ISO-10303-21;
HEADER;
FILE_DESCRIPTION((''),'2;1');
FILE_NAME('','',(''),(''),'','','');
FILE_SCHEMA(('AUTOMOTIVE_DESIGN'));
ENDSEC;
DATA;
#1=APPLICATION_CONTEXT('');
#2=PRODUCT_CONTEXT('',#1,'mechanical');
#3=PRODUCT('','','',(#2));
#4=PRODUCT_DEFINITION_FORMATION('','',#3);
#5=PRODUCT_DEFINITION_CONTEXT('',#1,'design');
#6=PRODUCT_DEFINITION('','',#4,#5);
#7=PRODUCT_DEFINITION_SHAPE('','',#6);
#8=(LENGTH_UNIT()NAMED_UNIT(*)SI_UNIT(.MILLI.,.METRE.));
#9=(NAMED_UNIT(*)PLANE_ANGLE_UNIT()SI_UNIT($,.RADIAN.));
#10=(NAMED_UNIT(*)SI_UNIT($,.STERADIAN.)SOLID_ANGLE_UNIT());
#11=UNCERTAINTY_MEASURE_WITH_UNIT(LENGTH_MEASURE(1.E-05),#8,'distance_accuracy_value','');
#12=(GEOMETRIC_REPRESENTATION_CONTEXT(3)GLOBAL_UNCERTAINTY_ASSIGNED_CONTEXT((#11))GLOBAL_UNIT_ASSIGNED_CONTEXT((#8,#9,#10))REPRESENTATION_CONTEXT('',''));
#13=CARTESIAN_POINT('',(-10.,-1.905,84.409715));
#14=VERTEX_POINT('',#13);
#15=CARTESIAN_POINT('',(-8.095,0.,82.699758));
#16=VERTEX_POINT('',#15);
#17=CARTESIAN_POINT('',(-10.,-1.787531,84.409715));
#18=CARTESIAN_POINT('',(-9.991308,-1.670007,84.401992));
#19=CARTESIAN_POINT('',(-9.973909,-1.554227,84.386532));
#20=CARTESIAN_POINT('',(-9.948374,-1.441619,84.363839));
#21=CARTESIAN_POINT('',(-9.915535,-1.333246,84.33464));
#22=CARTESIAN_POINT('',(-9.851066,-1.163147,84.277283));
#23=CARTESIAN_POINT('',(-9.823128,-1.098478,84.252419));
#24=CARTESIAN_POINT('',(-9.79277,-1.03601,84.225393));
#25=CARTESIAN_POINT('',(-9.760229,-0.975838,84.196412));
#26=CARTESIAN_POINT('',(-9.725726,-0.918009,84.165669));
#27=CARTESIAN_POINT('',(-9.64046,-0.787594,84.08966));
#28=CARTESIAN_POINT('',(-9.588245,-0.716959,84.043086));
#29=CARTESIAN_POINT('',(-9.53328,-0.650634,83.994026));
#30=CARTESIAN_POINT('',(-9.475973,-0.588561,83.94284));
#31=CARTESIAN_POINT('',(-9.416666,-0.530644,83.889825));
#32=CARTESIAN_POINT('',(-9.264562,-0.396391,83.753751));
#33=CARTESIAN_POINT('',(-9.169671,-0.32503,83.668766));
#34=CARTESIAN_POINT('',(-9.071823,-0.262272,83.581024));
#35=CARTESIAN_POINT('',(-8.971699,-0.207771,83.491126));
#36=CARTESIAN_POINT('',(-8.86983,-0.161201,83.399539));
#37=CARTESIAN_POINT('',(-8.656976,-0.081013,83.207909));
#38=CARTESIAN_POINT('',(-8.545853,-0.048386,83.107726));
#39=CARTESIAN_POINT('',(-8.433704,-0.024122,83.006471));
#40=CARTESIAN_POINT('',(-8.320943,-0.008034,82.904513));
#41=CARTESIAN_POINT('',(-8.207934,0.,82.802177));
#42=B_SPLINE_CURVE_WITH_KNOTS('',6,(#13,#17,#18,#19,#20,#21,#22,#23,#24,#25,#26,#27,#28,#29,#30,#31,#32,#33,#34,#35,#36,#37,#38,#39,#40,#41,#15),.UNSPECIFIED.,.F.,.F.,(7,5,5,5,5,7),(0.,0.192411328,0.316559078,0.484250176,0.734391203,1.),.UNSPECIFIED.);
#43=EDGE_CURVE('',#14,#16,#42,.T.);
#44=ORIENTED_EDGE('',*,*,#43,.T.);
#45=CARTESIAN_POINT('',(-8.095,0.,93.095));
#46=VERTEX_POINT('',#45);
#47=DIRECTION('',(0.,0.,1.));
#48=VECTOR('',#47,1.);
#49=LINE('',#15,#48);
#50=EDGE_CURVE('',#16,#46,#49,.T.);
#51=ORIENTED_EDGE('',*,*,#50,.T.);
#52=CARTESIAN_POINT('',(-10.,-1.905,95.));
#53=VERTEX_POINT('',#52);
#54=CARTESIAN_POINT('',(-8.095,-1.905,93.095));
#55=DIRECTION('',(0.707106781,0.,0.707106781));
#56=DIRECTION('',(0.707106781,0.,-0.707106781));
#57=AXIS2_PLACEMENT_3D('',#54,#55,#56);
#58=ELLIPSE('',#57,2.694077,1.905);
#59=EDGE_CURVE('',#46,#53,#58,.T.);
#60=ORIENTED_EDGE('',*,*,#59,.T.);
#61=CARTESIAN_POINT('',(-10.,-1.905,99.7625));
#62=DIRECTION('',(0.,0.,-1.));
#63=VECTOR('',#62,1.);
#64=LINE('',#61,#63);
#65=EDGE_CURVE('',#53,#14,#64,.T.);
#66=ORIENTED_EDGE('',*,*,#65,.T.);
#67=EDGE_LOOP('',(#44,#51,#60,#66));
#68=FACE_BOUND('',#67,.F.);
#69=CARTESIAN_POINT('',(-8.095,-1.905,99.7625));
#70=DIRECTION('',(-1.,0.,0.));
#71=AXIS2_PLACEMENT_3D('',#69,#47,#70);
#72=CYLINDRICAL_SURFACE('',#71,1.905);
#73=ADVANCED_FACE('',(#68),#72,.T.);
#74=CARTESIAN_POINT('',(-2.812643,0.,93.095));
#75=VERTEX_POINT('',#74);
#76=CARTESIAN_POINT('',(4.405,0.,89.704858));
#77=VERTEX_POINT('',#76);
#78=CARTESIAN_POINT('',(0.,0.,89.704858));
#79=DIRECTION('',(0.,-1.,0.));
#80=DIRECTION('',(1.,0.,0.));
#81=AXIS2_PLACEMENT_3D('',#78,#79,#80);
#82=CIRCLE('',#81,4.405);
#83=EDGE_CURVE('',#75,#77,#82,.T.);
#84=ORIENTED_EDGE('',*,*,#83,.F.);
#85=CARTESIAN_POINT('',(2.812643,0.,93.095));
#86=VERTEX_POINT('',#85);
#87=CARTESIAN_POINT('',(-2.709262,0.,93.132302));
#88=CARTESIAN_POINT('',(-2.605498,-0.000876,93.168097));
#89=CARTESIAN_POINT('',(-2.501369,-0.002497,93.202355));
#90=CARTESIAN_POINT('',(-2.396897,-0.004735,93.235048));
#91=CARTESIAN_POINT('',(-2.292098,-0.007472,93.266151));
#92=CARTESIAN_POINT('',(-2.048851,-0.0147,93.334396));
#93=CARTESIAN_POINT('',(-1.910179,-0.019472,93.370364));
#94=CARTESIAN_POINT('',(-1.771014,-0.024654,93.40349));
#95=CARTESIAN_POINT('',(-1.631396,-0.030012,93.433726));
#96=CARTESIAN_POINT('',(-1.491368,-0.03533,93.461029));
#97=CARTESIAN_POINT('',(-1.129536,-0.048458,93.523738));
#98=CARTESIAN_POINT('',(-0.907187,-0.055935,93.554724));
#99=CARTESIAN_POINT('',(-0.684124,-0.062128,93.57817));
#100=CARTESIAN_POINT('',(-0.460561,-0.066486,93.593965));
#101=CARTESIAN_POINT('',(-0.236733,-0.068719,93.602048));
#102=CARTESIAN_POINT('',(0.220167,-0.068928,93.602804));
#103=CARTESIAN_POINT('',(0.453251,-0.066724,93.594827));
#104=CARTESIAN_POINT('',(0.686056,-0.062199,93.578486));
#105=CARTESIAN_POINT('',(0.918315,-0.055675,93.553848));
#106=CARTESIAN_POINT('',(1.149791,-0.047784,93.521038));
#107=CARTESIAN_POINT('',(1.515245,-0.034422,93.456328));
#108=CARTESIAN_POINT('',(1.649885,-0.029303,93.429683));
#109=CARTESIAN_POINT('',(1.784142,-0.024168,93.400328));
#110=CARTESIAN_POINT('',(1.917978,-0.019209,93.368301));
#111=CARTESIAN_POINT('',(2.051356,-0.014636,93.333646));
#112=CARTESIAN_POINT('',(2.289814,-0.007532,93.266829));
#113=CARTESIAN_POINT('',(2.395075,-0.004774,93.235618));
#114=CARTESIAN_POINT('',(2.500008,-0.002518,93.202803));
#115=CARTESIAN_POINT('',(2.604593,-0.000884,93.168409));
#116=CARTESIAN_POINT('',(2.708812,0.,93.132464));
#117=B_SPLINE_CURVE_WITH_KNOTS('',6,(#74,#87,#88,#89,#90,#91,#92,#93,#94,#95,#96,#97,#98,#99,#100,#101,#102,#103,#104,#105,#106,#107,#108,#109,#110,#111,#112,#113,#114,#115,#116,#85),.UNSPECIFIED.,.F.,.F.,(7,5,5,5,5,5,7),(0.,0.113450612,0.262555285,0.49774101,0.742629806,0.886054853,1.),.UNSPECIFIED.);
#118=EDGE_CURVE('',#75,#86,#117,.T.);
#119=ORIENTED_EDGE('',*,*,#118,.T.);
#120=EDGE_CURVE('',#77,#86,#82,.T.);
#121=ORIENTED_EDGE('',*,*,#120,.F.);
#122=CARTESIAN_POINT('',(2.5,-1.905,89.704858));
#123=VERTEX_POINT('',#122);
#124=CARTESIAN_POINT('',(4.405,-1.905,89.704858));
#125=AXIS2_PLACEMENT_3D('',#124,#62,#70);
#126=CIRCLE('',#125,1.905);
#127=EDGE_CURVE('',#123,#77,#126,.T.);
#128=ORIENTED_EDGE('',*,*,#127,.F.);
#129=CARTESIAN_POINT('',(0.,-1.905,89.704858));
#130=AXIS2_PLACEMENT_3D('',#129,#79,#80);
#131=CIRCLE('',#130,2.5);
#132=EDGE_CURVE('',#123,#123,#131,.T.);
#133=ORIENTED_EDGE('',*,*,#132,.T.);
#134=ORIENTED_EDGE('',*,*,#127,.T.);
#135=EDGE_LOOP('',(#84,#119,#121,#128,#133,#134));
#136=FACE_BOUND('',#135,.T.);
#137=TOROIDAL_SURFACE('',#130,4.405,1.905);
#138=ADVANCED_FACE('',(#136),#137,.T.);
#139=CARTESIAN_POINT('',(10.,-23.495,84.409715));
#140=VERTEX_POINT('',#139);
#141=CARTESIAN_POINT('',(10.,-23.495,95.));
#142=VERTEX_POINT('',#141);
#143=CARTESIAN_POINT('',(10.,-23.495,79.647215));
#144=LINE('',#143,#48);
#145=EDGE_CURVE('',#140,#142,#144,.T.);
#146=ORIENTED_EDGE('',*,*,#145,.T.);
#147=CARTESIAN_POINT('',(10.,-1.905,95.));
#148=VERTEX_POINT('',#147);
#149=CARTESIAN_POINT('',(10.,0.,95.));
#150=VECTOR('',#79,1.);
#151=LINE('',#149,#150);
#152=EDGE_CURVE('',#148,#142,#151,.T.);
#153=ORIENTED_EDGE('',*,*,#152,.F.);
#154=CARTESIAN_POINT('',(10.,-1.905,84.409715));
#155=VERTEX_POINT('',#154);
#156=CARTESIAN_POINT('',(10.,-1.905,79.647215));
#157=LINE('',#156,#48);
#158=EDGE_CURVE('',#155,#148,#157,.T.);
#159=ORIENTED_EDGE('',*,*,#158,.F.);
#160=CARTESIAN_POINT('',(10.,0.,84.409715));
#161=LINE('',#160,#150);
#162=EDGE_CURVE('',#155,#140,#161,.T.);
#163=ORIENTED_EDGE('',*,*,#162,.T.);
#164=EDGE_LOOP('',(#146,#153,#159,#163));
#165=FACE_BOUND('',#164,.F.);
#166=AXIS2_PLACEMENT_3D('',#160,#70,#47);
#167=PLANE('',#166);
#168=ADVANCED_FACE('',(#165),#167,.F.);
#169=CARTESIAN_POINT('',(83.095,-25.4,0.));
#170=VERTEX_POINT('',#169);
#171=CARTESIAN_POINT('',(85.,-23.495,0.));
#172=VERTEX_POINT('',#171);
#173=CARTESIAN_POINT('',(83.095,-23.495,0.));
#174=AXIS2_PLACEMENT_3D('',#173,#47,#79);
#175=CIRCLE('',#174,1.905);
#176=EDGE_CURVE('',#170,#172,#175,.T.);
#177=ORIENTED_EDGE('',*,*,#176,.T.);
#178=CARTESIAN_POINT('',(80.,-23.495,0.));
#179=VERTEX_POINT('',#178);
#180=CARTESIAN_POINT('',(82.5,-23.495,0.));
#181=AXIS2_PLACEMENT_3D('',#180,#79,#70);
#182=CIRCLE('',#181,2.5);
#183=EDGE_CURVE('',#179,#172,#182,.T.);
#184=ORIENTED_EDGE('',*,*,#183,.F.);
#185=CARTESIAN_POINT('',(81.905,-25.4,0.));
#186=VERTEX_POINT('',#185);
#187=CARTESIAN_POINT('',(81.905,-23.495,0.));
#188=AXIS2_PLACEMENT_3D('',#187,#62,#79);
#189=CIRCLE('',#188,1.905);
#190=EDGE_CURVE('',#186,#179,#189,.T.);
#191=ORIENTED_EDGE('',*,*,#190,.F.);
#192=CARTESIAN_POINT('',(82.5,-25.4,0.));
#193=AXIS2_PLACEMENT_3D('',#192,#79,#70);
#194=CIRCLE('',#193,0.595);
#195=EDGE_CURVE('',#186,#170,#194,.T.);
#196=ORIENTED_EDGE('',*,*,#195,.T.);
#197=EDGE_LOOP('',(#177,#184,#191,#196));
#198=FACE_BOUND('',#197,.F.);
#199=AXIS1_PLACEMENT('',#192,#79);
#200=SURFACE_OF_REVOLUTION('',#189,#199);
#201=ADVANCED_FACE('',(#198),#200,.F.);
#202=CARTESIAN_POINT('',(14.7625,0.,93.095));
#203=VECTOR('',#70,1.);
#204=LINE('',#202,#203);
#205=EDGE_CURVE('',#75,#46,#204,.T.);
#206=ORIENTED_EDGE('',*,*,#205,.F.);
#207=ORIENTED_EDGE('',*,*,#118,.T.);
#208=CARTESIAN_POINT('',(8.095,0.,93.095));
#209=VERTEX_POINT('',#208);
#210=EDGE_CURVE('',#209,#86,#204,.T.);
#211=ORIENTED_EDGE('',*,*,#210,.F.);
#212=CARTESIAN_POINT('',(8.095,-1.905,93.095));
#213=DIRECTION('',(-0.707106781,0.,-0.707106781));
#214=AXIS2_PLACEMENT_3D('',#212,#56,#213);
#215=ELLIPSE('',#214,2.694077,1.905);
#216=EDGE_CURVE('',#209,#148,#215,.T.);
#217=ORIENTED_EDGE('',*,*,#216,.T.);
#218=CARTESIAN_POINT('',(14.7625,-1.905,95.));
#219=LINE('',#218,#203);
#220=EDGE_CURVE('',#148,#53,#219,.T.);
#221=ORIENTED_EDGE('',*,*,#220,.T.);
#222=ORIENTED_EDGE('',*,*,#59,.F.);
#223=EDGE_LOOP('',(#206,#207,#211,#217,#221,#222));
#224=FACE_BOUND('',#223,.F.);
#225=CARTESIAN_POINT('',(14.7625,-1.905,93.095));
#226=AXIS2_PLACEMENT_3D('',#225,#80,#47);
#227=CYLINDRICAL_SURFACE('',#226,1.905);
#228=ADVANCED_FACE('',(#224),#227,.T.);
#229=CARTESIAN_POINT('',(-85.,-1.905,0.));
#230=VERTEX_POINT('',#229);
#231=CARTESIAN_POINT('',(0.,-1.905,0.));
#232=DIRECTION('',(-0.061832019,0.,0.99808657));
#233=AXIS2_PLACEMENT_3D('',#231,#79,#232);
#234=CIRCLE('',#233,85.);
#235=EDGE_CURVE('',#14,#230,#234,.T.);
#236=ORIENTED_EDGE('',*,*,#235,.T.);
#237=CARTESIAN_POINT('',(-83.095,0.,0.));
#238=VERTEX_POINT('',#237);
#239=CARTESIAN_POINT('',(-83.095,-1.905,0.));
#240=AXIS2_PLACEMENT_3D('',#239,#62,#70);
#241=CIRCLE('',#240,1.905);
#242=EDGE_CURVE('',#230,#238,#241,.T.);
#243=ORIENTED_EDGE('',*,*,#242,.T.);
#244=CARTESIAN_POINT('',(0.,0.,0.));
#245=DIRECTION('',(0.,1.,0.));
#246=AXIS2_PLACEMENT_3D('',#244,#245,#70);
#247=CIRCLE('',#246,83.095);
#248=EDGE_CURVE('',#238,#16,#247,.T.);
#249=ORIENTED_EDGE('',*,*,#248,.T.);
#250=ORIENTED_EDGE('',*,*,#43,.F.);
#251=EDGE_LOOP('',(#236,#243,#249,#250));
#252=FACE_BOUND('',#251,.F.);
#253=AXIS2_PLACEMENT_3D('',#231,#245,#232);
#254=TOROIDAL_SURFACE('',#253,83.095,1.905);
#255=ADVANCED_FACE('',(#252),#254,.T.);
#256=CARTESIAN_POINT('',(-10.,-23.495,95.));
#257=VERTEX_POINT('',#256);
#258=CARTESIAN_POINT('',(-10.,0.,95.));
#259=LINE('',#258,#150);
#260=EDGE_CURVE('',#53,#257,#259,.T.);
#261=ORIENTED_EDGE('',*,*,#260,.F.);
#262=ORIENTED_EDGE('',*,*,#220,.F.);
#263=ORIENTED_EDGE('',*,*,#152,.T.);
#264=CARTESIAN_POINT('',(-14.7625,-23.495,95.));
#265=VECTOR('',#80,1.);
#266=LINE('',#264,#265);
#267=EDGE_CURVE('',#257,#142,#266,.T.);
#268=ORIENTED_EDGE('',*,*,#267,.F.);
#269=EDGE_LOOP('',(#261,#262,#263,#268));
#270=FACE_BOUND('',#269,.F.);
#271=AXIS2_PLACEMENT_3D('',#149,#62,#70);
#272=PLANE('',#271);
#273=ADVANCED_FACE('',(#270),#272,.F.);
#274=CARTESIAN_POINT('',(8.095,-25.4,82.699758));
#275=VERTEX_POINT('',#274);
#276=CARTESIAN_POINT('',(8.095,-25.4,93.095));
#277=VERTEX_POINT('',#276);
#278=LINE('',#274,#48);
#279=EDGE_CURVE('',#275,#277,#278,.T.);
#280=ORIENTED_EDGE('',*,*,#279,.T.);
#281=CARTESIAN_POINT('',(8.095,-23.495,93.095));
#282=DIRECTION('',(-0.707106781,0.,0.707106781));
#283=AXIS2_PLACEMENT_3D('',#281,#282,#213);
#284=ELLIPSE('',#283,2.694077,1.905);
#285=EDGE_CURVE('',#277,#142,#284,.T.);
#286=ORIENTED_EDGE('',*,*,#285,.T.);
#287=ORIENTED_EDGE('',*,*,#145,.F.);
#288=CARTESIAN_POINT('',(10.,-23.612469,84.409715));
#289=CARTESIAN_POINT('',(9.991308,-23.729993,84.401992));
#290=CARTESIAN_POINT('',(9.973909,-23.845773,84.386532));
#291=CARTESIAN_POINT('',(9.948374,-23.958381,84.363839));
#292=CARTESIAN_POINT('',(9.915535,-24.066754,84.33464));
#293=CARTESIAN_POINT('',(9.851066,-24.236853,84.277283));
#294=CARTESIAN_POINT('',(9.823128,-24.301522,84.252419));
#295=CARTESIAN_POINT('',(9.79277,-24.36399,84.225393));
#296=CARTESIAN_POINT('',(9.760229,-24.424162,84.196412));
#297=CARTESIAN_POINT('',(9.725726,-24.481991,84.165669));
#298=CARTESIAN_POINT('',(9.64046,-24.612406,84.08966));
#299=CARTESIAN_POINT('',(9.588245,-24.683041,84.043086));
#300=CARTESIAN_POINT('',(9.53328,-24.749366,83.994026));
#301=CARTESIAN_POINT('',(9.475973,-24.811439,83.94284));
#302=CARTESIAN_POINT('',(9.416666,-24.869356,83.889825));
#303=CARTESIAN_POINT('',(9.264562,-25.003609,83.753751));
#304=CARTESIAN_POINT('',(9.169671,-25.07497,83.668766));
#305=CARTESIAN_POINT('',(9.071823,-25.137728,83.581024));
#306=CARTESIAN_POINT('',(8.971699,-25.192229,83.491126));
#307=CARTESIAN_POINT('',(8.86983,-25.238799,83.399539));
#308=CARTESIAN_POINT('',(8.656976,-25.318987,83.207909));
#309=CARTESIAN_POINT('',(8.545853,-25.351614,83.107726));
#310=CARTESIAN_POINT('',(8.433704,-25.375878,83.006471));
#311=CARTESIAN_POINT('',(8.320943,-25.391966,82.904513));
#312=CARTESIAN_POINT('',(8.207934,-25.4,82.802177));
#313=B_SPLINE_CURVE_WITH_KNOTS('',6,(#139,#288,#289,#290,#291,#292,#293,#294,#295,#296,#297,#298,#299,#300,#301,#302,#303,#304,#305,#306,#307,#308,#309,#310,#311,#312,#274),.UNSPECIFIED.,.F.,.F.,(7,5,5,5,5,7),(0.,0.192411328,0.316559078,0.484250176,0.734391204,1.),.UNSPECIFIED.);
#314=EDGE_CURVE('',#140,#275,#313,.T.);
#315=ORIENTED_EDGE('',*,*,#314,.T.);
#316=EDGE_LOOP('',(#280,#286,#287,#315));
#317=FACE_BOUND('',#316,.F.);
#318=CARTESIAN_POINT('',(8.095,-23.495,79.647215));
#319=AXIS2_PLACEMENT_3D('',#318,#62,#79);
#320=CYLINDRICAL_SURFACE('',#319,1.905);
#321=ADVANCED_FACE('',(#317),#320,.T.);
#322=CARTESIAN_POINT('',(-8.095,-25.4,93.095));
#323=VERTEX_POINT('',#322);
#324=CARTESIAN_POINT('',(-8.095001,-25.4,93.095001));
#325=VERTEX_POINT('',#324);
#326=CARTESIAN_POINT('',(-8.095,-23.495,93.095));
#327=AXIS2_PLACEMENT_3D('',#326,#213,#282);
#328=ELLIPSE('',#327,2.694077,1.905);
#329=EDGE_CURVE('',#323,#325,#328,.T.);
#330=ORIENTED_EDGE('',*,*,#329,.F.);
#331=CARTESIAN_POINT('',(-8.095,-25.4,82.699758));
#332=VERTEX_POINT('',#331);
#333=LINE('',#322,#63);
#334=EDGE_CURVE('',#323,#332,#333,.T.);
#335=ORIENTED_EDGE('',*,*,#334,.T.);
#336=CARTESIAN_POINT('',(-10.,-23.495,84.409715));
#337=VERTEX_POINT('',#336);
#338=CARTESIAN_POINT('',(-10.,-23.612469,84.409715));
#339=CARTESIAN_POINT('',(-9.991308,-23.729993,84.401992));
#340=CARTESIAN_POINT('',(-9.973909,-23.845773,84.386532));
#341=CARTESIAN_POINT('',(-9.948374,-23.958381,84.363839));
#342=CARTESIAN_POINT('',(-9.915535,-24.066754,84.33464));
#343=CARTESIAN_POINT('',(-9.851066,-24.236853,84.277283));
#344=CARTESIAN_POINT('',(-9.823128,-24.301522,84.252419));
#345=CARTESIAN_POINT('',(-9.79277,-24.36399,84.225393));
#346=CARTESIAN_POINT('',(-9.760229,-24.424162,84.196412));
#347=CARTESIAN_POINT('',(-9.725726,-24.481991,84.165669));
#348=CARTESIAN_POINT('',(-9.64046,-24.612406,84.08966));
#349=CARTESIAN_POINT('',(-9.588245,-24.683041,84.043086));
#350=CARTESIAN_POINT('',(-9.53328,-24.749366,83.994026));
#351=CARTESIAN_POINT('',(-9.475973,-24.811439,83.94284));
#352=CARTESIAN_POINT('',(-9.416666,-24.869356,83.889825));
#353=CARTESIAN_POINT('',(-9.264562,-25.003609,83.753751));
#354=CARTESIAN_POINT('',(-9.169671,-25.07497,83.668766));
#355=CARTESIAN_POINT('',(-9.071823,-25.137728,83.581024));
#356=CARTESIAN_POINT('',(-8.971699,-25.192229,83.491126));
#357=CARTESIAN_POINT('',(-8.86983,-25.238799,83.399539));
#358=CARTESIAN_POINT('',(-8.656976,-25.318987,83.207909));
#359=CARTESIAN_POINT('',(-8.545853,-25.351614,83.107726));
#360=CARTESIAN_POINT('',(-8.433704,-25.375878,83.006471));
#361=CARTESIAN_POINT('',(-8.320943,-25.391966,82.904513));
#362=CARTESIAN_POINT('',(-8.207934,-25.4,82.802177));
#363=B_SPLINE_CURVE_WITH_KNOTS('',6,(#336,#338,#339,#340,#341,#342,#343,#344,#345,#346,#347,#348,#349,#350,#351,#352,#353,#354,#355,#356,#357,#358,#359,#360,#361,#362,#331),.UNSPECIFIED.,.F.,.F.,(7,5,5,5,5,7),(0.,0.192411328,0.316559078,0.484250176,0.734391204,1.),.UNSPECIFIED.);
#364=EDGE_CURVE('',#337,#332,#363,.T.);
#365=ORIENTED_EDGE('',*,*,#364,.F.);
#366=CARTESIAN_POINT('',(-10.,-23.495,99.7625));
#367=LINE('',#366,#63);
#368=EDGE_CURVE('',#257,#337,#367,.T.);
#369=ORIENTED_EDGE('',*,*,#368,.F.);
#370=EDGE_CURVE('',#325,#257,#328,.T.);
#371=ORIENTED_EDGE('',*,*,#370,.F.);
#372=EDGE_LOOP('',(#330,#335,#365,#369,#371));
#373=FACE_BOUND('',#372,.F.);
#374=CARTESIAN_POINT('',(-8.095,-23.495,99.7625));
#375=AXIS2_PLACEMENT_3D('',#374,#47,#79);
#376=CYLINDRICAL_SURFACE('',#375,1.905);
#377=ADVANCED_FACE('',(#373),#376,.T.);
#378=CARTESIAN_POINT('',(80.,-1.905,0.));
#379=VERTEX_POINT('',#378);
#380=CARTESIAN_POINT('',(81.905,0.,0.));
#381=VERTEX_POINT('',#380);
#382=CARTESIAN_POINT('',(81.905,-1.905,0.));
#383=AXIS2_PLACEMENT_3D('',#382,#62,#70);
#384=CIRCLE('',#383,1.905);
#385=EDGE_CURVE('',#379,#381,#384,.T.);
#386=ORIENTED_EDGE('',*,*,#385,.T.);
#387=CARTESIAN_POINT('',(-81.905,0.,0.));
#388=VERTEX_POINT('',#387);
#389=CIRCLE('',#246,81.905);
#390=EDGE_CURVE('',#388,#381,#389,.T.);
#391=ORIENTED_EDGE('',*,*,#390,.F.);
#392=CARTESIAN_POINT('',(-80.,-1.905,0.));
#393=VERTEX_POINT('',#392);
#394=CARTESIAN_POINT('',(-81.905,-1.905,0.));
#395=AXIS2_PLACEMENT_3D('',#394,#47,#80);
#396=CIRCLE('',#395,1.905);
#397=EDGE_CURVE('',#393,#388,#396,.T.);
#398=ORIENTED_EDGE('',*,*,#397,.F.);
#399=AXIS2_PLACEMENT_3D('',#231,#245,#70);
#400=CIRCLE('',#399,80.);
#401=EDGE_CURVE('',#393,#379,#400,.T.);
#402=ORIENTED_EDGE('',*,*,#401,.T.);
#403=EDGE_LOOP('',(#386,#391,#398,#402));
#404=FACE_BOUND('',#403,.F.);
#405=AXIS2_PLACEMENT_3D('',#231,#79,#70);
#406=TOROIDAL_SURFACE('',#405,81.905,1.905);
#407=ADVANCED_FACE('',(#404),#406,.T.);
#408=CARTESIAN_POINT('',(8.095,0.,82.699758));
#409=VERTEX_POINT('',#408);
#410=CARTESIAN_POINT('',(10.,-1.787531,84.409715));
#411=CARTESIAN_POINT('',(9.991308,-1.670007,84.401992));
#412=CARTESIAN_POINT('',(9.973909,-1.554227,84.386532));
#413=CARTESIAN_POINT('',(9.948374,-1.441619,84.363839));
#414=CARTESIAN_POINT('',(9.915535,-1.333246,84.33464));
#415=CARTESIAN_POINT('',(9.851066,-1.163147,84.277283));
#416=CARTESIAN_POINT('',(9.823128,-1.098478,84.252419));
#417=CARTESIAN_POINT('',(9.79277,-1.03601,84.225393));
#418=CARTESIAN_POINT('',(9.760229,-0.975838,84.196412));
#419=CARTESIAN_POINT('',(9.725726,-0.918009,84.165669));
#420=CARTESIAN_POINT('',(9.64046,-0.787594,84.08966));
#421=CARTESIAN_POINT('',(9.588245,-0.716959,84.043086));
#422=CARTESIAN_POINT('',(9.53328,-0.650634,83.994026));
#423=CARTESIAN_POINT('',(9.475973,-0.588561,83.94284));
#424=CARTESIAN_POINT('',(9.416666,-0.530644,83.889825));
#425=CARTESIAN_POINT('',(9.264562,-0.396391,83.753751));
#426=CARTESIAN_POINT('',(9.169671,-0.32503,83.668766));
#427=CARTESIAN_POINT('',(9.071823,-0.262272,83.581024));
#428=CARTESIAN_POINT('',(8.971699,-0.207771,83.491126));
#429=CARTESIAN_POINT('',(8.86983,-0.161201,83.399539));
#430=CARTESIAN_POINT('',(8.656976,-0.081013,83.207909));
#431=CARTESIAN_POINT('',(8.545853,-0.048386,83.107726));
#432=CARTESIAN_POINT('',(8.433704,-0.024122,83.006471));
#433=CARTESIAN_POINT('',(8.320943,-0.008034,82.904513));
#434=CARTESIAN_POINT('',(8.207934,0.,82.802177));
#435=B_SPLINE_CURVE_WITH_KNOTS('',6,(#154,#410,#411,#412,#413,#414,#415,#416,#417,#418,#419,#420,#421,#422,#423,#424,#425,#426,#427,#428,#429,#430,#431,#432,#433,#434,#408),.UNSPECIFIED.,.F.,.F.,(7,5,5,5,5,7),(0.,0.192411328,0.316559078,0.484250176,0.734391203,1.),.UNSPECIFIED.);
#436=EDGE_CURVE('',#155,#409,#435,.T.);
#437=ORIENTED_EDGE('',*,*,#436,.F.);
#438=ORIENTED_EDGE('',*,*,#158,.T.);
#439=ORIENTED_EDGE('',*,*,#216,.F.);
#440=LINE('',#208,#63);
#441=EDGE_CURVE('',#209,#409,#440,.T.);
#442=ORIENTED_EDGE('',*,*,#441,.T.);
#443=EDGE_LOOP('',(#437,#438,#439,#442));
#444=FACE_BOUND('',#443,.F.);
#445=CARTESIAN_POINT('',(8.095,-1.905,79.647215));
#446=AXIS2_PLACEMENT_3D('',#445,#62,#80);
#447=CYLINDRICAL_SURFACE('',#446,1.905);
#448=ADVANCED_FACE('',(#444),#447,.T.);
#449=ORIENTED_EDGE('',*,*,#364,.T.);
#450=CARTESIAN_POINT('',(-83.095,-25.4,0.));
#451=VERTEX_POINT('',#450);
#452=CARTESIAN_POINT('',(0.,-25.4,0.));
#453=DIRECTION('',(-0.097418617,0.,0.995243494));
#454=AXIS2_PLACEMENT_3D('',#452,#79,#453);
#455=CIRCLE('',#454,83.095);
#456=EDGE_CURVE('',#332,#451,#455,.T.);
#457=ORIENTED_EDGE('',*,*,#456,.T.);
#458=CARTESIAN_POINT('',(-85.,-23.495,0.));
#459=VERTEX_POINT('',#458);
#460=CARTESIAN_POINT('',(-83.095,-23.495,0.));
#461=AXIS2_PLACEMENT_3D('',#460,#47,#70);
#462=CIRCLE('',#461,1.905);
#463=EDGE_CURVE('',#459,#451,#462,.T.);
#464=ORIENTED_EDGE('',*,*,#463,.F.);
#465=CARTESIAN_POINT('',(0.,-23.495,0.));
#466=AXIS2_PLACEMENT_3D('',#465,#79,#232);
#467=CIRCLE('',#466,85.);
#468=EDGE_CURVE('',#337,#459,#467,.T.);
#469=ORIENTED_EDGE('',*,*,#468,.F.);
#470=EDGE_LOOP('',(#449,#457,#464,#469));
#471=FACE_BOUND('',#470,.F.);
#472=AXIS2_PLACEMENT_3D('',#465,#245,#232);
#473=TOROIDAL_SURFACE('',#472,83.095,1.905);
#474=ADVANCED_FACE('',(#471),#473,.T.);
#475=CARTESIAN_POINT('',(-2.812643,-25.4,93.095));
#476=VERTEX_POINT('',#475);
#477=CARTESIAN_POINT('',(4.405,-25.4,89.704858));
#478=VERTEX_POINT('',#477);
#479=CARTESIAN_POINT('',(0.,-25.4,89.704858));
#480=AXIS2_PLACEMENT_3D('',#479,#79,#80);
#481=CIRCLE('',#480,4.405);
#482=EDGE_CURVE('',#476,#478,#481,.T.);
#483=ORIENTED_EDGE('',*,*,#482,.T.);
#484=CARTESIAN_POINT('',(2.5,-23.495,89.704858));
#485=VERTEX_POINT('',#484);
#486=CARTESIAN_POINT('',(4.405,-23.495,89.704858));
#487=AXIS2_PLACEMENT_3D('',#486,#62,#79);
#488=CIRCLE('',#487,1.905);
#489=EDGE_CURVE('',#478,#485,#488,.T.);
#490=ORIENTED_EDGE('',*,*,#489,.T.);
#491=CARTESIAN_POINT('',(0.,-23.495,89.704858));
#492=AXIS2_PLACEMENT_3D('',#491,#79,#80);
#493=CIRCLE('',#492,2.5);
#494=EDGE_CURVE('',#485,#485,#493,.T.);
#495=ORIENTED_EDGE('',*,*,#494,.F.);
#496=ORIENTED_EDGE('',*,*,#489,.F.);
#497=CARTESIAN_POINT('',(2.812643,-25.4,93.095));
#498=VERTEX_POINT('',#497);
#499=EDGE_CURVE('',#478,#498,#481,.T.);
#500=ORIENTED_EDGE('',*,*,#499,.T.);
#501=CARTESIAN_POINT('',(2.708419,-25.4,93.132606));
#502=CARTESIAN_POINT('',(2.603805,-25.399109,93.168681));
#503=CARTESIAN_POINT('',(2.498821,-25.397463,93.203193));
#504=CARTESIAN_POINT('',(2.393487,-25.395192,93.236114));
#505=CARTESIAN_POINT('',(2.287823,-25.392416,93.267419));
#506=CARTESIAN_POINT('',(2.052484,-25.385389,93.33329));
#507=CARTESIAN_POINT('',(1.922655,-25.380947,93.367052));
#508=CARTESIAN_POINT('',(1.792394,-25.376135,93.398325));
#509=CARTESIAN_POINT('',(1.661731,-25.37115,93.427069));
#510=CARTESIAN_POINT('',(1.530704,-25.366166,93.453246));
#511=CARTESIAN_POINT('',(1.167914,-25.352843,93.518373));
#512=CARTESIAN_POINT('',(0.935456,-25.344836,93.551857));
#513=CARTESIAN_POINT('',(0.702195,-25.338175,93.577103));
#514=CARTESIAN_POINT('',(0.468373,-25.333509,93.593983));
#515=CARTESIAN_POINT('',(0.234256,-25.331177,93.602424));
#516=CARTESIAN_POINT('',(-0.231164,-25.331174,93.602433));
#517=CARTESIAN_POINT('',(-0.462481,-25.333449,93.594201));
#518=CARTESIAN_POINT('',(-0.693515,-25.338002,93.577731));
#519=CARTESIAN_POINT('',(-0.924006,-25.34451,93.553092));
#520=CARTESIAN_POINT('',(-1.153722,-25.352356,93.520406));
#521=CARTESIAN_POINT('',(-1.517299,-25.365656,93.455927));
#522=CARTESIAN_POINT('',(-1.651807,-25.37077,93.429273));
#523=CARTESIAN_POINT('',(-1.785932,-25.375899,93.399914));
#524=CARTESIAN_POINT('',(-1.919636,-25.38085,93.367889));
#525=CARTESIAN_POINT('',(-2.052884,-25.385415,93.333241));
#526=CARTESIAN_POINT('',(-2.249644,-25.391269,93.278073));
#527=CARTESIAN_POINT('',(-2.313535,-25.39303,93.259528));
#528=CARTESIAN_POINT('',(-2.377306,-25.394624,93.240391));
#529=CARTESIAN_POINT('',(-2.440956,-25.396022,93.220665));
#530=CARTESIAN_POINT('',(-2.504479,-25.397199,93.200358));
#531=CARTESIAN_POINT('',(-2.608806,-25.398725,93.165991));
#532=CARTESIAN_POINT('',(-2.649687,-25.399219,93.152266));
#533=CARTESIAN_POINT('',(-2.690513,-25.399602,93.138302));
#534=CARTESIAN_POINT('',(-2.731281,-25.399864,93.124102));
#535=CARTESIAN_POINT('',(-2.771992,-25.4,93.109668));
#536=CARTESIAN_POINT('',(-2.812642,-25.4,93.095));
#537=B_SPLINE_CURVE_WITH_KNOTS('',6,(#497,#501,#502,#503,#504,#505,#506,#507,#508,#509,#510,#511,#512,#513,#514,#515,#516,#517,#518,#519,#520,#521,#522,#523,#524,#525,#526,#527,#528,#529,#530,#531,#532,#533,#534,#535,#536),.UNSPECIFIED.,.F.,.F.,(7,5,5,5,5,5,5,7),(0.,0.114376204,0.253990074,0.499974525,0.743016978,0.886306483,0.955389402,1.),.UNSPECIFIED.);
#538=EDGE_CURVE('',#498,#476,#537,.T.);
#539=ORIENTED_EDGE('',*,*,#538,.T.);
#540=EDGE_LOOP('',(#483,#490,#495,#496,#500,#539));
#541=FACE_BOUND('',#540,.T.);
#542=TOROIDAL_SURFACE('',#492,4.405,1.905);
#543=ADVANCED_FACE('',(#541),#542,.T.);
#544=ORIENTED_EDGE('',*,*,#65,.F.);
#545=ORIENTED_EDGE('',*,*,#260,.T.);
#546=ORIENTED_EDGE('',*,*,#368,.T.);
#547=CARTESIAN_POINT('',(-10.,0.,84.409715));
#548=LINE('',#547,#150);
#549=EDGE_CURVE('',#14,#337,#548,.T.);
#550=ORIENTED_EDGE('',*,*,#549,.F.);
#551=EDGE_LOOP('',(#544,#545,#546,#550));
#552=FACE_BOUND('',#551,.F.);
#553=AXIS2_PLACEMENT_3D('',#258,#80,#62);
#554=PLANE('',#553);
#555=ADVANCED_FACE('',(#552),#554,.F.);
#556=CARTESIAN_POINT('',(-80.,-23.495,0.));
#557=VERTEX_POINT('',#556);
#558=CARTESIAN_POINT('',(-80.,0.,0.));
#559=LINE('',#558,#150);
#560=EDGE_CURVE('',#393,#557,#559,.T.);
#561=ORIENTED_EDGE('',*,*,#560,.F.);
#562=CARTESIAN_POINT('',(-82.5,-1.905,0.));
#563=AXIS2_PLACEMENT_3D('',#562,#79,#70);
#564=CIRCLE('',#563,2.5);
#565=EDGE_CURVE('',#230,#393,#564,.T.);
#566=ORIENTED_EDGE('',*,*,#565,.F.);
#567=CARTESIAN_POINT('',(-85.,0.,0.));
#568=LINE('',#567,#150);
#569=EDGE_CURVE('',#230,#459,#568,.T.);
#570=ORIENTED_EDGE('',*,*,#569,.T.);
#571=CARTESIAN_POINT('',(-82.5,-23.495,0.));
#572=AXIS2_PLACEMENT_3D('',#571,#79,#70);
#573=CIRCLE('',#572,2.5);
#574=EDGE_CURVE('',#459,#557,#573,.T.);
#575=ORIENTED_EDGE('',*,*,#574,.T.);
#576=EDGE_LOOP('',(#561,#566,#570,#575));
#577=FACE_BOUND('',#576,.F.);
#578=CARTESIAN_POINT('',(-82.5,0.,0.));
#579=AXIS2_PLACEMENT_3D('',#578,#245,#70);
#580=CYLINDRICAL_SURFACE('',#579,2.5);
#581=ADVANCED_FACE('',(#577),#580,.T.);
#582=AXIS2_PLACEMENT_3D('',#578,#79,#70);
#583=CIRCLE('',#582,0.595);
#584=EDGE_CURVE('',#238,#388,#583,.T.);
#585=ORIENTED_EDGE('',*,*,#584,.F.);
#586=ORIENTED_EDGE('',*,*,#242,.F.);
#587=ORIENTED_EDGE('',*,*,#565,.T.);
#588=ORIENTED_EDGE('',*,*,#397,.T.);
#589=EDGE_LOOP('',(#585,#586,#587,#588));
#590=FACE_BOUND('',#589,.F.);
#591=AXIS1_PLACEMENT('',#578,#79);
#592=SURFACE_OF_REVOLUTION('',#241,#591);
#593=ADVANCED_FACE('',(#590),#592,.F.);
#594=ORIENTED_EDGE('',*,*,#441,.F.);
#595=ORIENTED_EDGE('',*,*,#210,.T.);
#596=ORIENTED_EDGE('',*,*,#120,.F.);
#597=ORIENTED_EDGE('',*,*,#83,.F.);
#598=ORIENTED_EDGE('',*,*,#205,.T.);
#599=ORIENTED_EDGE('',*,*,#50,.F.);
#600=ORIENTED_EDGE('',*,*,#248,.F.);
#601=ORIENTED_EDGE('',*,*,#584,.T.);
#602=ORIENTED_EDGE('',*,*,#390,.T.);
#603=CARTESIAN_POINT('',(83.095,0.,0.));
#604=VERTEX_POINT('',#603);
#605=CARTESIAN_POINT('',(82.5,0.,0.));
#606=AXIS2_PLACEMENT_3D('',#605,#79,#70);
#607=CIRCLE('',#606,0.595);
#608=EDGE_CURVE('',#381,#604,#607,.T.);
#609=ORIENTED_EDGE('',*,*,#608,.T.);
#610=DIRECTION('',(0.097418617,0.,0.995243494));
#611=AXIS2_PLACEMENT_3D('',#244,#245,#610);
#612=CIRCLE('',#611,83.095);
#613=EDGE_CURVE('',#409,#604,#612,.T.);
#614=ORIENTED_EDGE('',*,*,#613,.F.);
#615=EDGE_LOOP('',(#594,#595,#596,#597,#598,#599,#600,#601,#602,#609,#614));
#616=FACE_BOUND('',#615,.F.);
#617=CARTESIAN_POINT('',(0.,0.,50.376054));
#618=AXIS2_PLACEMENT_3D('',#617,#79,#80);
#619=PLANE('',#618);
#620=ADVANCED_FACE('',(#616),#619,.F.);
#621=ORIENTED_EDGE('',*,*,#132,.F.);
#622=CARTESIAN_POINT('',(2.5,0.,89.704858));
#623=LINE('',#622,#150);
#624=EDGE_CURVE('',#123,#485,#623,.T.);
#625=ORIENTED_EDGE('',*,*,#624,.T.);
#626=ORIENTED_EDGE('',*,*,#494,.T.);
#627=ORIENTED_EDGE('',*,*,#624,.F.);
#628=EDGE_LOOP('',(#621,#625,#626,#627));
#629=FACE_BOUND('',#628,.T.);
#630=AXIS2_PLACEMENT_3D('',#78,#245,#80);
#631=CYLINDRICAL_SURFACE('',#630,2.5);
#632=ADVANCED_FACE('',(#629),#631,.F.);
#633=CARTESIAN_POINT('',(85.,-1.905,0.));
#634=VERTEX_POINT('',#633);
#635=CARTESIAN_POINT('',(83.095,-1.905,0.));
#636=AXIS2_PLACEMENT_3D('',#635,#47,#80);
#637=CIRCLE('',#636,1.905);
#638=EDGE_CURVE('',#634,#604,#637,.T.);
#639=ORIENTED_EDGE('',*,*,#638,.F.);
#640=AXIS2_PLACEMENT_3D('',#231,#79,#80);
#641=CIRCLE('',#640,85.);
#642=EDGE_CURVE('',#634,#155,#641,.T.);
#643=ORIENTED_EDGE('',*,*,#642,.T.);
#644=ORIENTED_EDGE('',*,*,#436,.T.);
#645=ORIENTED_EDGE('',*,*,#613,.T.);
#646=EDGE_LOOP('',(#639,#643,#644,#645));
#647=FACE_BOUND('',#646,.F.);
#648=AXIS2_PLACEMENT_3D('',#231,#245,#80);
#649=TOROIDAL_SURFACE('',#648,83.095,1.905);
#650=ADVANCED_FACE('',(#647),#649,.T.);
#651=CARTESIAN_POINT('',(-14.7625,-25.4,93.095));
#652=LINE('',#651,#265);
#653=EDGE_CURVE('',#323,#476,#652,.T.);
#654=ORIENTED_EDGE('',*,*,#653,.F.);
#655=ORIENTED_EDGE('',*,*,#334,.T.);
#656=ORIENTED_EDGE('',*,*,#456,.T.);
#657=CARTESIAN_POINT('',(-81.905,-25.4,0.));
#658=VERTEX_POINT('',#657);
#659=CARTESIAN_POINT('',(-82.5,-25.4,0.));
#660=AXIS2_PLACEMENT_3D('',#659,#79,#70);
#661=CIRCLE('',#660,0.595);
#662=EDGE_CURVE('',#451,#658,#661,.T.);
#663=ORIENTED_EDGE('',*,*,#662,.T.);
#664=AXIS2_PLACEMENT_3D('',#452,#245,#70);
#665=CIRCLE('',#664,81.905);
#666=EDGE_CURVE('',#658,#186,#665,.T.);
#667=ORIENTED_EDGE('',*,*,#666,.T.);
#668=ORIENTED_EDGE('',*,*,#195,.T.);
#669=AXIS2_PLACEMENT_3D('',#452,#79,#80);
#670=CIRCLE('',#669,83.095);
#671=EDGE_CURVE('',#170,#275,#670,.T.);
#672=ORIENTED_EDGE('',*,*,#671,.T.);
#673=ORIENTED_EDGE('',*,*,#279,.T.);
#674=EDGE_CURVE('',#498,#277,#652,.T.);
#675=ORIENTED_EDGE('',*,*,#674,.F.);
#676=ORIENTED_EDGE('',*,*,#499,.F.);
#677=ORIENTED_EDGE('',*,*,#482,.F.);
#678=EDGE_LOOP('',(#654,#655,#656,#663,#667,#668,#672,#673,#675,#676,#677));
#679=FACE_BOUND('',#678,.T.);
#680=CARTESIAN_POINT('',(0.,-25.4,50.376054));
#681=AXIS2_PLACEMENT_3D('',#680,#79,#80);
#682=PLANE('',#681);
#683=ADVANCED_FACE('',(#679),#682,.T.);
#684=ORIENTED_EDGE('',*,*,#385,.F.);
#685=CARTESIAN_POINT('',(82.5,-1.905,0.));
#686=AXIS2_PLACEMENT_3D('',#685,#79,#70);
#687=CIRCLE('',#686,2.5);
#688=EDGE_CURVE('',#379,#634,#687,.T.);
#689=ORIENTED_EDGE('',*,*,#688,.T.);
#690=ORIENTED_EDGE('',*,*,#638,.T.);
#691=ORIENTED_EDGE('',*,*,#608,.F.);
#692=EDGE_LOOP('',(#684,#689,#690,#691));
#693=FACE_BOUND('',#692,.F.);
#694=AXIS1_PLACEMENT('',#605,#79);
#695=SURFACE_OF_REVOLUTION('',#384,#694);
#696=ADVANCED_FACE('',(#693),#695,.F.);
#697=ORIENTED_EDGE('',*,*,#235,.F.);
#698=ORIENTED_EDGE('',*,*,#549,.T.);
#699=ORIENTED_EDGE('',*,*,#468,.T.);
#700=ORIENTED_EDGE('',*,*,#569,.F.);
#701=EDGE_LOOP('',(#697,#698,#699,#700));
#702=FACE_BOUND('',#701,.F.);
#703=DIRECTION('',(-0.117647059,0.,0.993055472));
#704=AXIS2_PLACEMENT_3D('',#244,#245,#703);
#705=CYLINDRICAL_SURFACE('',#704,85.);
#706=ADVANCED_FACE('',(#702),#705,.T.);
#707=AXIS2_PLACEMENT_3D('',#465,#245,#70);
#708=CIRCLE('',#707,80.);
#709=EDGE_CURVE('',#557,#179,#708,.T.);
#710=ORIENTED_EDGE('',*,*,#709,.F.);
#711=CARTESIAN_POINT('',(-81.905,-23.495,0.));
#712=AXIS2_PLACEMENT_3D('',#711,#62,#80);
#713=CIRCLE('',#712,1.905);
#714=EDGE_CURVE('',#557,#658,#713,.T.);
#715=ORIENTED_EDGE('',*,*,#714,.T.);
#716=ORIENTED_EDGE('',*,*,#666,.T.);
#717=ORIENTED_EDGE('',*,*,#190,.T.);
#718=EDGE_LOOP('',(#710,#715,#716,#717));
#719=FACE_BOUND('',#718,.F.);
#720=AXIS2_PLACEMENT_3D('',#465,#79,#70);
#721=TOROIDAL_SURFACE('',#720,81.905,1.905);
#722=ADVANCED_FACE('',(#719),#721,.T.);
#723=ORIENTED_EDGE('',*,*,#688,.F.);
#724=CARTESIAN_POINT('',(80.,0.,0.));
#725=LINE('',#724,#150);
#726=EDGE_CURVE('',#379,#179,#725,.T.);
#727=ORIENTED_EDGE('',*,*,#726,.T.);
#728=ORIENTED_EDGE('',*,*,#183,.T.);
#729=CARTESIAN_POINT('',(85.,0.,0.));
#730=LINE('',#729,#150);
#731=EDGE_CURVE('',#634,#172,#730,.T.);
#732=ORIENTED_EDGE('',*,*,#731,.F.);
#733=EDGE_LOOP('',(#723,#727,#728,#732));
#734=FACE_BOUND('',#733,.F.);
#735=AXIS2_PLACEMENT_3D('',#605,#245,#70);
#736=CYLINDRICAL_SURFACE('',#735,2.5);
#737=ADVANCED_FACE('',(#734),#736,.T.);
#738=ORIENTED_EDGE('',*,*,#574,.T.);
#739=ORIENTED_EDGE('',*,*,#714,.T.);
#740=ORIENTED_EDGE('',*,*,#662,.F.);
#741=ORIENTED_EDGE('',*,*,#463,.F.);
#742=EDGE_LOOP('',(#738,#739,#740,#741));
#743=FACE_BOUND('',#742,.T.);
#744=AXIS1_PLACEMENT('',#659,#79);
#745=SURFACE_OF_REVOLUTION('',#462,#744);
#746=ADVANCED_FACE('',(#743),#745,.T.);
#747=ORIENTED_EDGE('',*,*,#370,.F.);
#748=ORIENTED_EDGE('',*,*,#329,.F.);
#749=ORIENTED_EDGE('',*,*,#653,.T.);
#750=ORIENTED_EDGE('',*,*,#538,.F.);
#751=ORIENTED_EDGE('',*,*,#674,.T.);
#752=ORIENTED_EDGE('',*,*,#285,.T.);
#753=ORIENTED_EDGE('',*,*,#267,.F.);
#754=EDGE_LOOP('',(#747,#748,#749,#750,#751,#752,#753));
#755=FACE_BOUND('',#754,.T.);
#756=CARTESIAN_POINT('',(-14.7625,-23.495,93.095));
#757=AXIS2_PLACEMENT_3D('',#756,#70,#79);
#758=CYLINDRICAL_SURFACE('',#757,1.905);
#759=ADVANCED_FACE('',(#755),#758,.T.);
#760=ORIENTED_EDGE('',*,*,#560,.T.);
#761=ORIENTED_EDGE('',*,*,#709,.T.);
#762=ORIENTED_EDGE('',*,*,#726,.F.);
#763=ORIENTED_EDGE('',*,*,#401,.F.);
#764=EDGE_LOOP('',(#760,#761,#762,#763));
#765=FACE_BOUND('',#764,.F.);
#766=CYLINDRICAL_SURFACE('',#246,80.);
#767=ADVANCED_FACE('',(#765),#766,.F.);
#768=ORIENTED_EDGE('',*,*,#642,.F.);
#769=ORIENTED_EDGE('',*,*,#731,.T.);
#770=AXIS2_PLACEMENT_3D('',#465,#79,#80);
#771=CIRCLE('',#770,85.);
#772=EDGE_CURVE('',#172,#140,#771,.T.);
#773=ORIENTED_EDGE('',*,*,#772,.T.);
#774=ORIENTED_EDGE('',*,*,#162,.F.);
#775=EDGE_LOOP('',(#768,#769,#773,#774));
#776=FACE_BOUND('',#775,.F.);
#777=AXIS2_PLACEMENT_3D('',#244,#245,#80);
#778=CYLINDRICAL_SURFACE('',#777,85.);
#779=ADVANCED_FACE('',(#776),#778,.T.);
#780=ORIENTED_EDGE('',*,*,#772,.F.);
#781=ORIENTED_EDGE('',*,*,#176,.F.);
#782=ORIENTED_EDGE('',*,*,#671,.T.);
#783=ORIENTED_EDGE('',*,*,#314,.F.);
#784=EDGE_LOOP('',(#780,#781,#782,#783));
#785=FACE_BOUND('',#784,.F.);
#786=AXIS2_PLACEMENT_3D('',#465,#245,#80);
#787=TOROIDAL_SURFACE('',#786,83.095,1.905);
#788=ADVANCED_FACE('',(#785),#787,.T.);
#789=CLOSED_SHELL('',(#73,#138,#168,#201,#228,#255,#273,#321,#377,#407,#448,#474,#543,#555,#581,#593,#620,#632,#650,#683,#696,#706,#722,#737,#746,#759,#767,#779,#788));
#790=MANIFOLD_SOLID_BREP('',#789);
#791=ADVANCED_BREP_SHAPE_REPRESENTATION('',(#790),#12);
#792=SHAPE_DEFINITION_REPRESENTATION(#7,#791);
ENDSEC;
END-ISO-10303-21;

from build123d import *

# Parameters (mm, degrees)
F0_R         = 2.5
F1_DEPTH     = 25.4
F2_T1_DEPTH  = 29.525
F2_T4_ANGLE  = 180
F2_T6_ANGLE  = 180
F2_T8_ANGLE  = 180
F2_T12_ANGLE = 86.4550249792
F2_T17_DEPTH = 20.1152849193
F2_S18_R     = 85
F2_T19_DEPTH = 12
F2_T23_DEPTH = 20.1152849193
F2_S24_R     = 85
F2_T25_DEPTH = 12
F2_T29_ANGLE = 86.4550249792
F2_T37_ANGLE = 86.4550249792
F2_T41_DEPTH = 20.1152849193
F2_S42_R     = 85
F2_T43_DEPTH = 12
F2_T49_DEPTH = 20.1152849193
F2_S50_R     = 85
F2_T51_DEPTH = 12
F2_T54_ANGLE = 86.4550249792
F3_T3_ANGLE  = 180
F3_T6_ANGLE  = 180
F3_T9_ANGLE  = 180
F3_T12_ANGLE = 86.4550249792
F3_T16_DEPTH = 20.1152849193
F3_S17_R     = 85
F3_T18_DEPTH = 12
F3_T21_DEPTH = 29.525
F3_T24_DEPTH = 20.1152849193
F3_S25_R     = 85
F3_T26_DEPTH = 12
F3_T29_ANGLE = 86.4550249792
F3_T37_DEPTH = 20.1152849193
F3_S38_R     = 85
F3_T39_DEPTH = 12
F3_T42_ANGLE = 86.4550249792
F3_T48_ANGLE = 86.4550249792
F3_T52_DEPTH = 20.1152849193
F3_S53_R     = 85
F3_T54_DEPTH = 12


# Not quite as in the source:
# - a fillet or chamfer that OpenCascade refuses, or shapes differently, is made with other operations: its cross-section is extruded or revolved along the edge and cut away or added


with BuildPart() as f1:
    # F0 (on Front) → F1 (new body)
    with BuildSketch(Plane.XZ):
        with BuildLine():
            ThreePointArc((-80, 0), (0, 80), (80, 0))
            ThreePointArc((80, 0), (82.5, -2.5), (85, 0))
            ThreePointArc((85, 0), (63.5413251357, 56.4579489532), (10, 84.4097150807))
            Line((10, 84.4097150807), (10, 95))
            Line((10, 95), (0, 95))
            Line((0, 95), (-10, 95))
            Line((-10, 95), (-10, 84.4097150807))
            ThreePointArc((-10, 84.4097150807), (-63.5413251357, 56.4579489532), (-85, 0))
            ThreePointArc((-85, 0), (-82.5, -2.5), (-80, 0))
        make_face()
        with Locations((0, 89.7048575403)):
            Circle(F0_R, mode=Mode.SUBTRACT)
    extrude(amount=F1_DEPTH)

    # F2: fillet of radius 1.905 on 9 edges, made by hand

    # F2_s2 → F2_t1 (cut)
    with BuildSketch(Plane.YZ.offset(-14.7625)):
        with BuildLine():
            ThreePointArc((-25.4, 93.095), (-24.8420384182, 94.4420384182), (-23.495, 95))
            Line((-23.495, 95), (-25.4, 95))
            Line((-25.4, 95), (-25.4, 93.095))
        make_face()
    extrude(amount=F2_T1_DEPTH, mode=Mode.SUBTRACT)

    # F2_s3 → F2_t4 (revolve, cut)
    with BuildSketch(Plane.XY):
        with BuildLine():
            ThreePointArc((-85, -23.495), (-84.4420384182, -24.8420384182), (-83.095, -25.4))
            Line((-83.095, -25.4), (-85, -25.4))
            Line((-85, -25.4), (-85, -23.495))
        make_face()
    revolve(axis=Axis((-82.5, -25.4, 0), (0, -1, 0)), revolution_arc=F2_T4_ANGLE, mode=Mode.SUBTRACT)

    # F2_s5 → F2_t6 (revolve, cut)
    with BuildSketch(Plane.XY):
        with BuildLine():
            ThreePointArc((-81.905, -25.4), (-80.5579615818, -24.8420384182), (-80, -23.495))
            Line((-80, -23.495), (-80, -25.4))
            Line((-80, -25.4), (-81.905, -25.4))
        make_face()
    revolve(axis=Axis((0, -25.4, 0), (0, 1, 0)), revolution_arc=F2_T6_ANGLE, mode=Mode.SUBTRACT)

    # F2_s7 → F2_t8 (revolve, cut)
    with BuildSketch(Plane.XY):
        with BuildLine():
            ThreePointArc((81.905, -25.4), (80.5579615818, -24.8420384182), (80, -23.495))
            Line((80, -23.495), (80, -25.4))
            Line((80, -25.4), (81.905, -25.4))
        make_face()
    revolve(axis=Axis((82.5, -25.4, 0), (0, -1, 0)), revolution_arc=F2_T8_ANGLE, mode=Mode.SUBTRACT)


with BuildPart() as f2_tool10:
    # F2_s11 → F2_t12 (revolve)
    with BuildSketch(Plane.XY):
        with BuildLine():
            ThreePointArc((83.095, -25.4), (84.4420384182, -24.8420384182), (85, -23.495))
            Line((85, -23.495), (85, -25.4))
            Line((85, -25.4), (83.095, -25.4))
        make_face()
    revolve(axis=Axis((0, -25.4, 0), (0, -1, 0)), revolution_arc=F2_T12_ANGLE)

    split(bisect_by=Plane.YZ.offset(10), keep=Keep.TOP)


with BuildPart() as f1_1:
    add(f1.part)

    # F2_t9: cut F2_tool10
    add(f2_tool10.part, mode=Mode.SUBTRACT)


with BuildPart() as f2_tool15:
    # F2_s16 → F2_t17 (new body)
    with BuildSketch(Plane.XY.offset(79.6472150807)):
        with BuildLine():
            ThreePointArc((8.095, -25.4), (9.4420384182, -24.8420384182), (10, -23.495))
            Line((10, -23.495), (10, -25.4))
            Line((10, -25.4), (8.095, -25.4))
        make_face()
    extrude(amount=F2_T17_DEPTH)

    # F2_s18 → F2_t19 (cut, symmetric)
    with BuildSketch(Plane.XZ.offset(24.4)):
        Circle(F2_S18_R)
    extrude(amount=F2_T19_DEPTH, both=True, mode=Mode.SUBTRACT)


with BuildPart() as f1_2:
    add(f1_1.part)

    # F2_t14: cut F2_tool15
    add(f2_tool15.part, mode=Mode.SUBTRACT)


with BuildPart() as f2_tool21:
    # F2_s22 → F2_t23 (new body)
    with BuildSketch(Plane.XY.offset(99.7625)):
        with BuildLine():
            ThreePointArc((-8.095, -25.4), (-9.4420384182, -24.8420384182), (-10, -23.495))
            Line((-10, -23.495), (-10, -25.4))
            Line((-10, -25.4), (-8.095, -25.4))
        make_face()
    extrude(amount=-F2_T23_DEPTH)

    # F2_s24 → F2_t25 (cut, symmetric)
    with BuildSketch(Plane.XZ.offset(24.4)):
        Circle(F2_S24_R)
    extrude(amount=F2_T25_DEPTH, both=True, mode=Mode.SUBTRACT)


with BuildPart() as f1_3:
    add(f1_2.part)

    # F2_t20: cut F2_tool21
    add(f2_tool21.part, mode=Mode.SUBTRACT)


with BuildPart() as f2_tool27:
    # F2_s28 → F2_t29 (revolve)
    with BuildSketch(Plane(origin=(0, 0, 0), x_dir=(0, 1, 0), z_dir=(0.9980865701, 0, 0.0618320187))):
        with BuildLine():
            ThreePointArc((-25.4, 83.095), (-24.8420384182, 84.4420384182), (-23.495, 85))
            Line((-23.495, 85), (-25.4, 85))
            Line((-25.4, 85), (-25.4, 83.095))
        make_face()
    revolve(axis=Axis((0, -25.4, 0), (0, -1, 0)), revolution_arc=F2_T29_ANGLE)

    split(bisect_by=Plane.YZ.offset(-10), keep=Keep.BOTTOM)


with BuildPart() as f1_4:
    add(f1_3.part)

    # F2_t26: cut F2_tool27
    add(f2_tool27.part, mode=Mode.SUBTRACT)

    # F2_s31 → F2_t32 (revolve, cut)
    with BuildSketch(Plane.XY.offset(89.7048575403)):
        with BuildLine():
            ThreePointArc((4.405, -25.4), (3.0579615818, -24.8420384182), (2.5, -23.495))
            Line((2.5, -23.495), (2.5, -25.4))
            Line((2.5, -25.4), (4.405, -25.4))
        make_face()
    revolve(axis=Axis((0, -25.4, 89.7048575403), (0, -1, 0)), mode=Mode.SUBTRACT)


with BuildPart() as f2_tool35:
    # F2_s36 → F2_t37 (revolve)
    with BuildSketch(Plane.XY):
        with BuildLine():
            ThreePointArc((83.095, -25.4), (84.4420384182, -24.8420384182), (85, -23.495))
            Line((85, -23.495), (85, -25.4))
            Line((85, -25.4), (83.095, -25.4))
        make_face()
    revolve(axis=Axis((0, -25.4, 0), (0, -1, 0)), revolution_arc=F2_T37_ANGLE)

    split(bisect_by=Plane.YZ.offset(10), keep=Keep.BOTTOM)


with BuildPart() as f2_tool39:
    # F2_s40 → F2_t41 (new body)
    with BuildSketch(Plane.XY.offset(79.6472150807)):
        with BuildLine():
            ThreePointArc((8.095, -25.4), (9.4420384182, -24.8420384182), (10, -23.495))
            Line((10, -23.495), (10, -25.4))
            Line((10, -25.4), (8.095, -25.4))
        make_face()
    extrude(amount=F2_T41_DEPTH)

    # F2_s42 → F2_t43 (intersect, symmetric)
    with BuildSketch(Plane.XZ.offset(24.4)):
        Circle(F2_S42_R)
    extrude(amount=F2_T43_DEPTH, both=True, mode=Mode.INTERSECT)


with BuildPart() as f2_tool35_1:
    add(f2_tool35.part)

    # F2_t44: intersect F2_tool39
    add(f2_tool39.part, mode=Mode.INTERSECT)


with BuildPart() as f1_5:
    add(f1_4.part)

    # F2_t33: cut F2_tool35
    add(f2_tool35_1.part, mode=Mode.SUBTRACT)


with BuildPart() as f2_tool47:
    # F2_s48 → F2_t49 (new body)
    with BuildSketch(Plane.XY.offset(99.7625)):
        with BuildLine():
            ThreePointArc((-8.095, -25.4), (-9.4420384182, -24.8420384182), (-10, -23.495))
            Line((-10, -23.495), (-10, -25.4))
            Line((-10, -25.4), (-8.095, -25.4))
        make_face()
    extrude(amount=-F2_T49_DEPTH)

    # F2_s50 → F2_t51 (intersect, symmetric)
    with BuildSketch(Plane.XZ.offset(24.4)):
        Circle(F2_S50_R)
    extrude(amount=F2_T51_DEPTH, both=True, mode=Mode.INTERSECT)


with BuildPart() as f2_tool52:
    # F2_s53 → F2_t54 (revolve)
    with BuildSketch(Plane(origin=(0, 0, 0), x_dir=(0, 1, 0), z_dir=(0.9980865701, 0, 0.0618320187))):
        with BuildLine():
            ThreePointArc((-25.4, 83.095), (-24.8420384182, 84.4420384182), (-23.495, 85))
            Line((-23.495, 85), (-25.4, 85))
            Line((-25.4, 85), (-25.4, 83.095))
        make_face()
    revolve(axis=Axis((0, -25.4, 0), (0, -1, 0)), revolution_arc=F2_T54_ANGLE)

    split(bisect_by=Plane.YZ.offset(-10), keep=Keep.TOP)


with BuildPart() as f2_tool47_1:
    add(f2_tool47.part)

    # F2_t56: intersect F2_tool52
    add(f2_tool52.part, mode=Mode.INTERSECT)


with BuildPart() as f1_6:
    add(f1_5.part)

    # F2_t45: cut F2_tool47
    add(f2_tool47_1.part, mode=Mode.SUBTRACT)

    # F3: fillet of radius 1.905 on 9 edges, made by hand


with BuildPart() as f3_tool1:
    # F3_s2 → F3_t3 (revolve)
    with BuildSketch(Plane.XY):
        with BuildLine():
            ThreePointArc((-85, -1.905), (-84.4420384182, -0.5579615818), (-83.095, 0))
            Line((-83.095, 0), (-85, 0))
            Line((-85, 0), (-85, -1.905))
        make_face()
    revolve(axis=Axis((-82.5, 0, 0), (0, -1, 0)), revolution_arc=F3_T3_ANGLE)


with BuildPart() as f3_tool4:
    # F3_s5 → F3_t6 (revolve)
    with BuildSketch(Plane.XY):
        with BuildLine():
            ThreePointArc((-80, -1.905), (-80.5579615818, -0.5579615818), (-81.905, 0))
            Line((-81.905, 0), (-80, 0))
            Line((-80, 0), (-80, -1.905))
        make_face()
    revolve(axis=Axis((0, 0, 0), (0, 1, 0)), revolution_arc=F3_T6_ANGLE)


with BuildPart() as f3_tool7:
    # F3_s8 → F3_t9 (revolve)
    with BuildSketch(Plane.XY):
        with BuildLine():
            ThreePointArc((80, -1.905), (80.5579615818, -0.5579615818), (81.905, 0))
            Line((81.905, 0), (80, 0))
            Line((80, 0), (80, -1.905))
        make_face()
    revolve(axis=Axis((82.5, 0, 0), (0, -1, 0)), revolution_arc=F3_T9_ANGLE)


with BuildPart() as f3_tool10:
    # F3_s11 → F3_t12 (revolve)
    with BuildSketch(Plane.XY):
        with BuildLine():
            ThreePointArc((85, -1.905), (84.4420384182, -0.5579615818), (83.095, 0))
            Line((83.095, 0), (85, 0))
            Line((85, 0), (85, -1.905))
        make_face()
    revolve(axis=Axis((0, 0, 0), (0, -1, 0)), revolution_arc=F3_T12_ANGLE)

    split(bisect_by=Plane.YZ.offset(10), keep=Keep.TOP)


with BuildPart() as f3_tool14:
    # F3_s15 → F3_t16 (new body)
    with BuildSketch(Plane.XY.offset(79.6472150807)):
        with BuildLine():
            ThreePointArc((10, -1.905), (9.4420384182, -0.5579615818), (8.095, 0))
            Line((8.095, 0), (10, 0))
            Line((10, 0), (10, -1.905))
        make_face()
    extrude(amount=F3_T16_DEPTH)

    # F3_s17 → F3_t18 (cut, symmetric)
    with BuildSketch(Plane.XZ.offset(1)):
        Circle(F3_S17_R)
    extrude(amount=F3_T18_DEPTH, both=True, mode=Mode.SUBTRACT)


with BuildPart() as f3_tool19:
    # F3_s20 → F3_t21 (new body)
    with BuildSketch(Plane.YZ.offset(14.7625)):
        with BuildLine():
            ThreePointArc((-1.905, 95), (-0.5579615818, 94.4420384182), (0, 93.095))
            Line((0, 93.095), (0, 95))
            Line((0, 95), (-1.905, 95))
        make_face()
    extrude(amount=-F3_T21_DEPTH)


with BuildPart() as f3_tool22:
    # F3_s23 → F3_t24 (new body)
    with BuildSketch(Plane.XY.offset(99.7625)):
        with BuildLine():
            ThreePointArc((-10, -1.905), (-9.4420384182, -0.5579615818), (-8.095, 0))
            Line((-8.095, 0), (-10, 0))
            Line((-10, 0), (-10, -1.905))
        make_face()
    extrude(amount=-F3_T24_DEPTH)

    # F3_s25 → F3_t26 (cut, symmetric)
    with BuildSketch(Plane.XZ.offset(1)):
        Circle(F3_S25_R)
    extrude(amount=F3_T26_DEPTH, both=True, mode=Mode.SUBTRACT)


with BuildPart() as f3_tool27:
    # F3_s28 → F3_t29 (revolve)
    with BuildSketch(Plane(origin=(0, 0, 0), x_dir=(0, 1, 0), z_dir=(0.9980865701, 0, 0.0618320187))):
        with BuildLine():
            ThreePointArc((-1.905, 85), (-0.5579615818, 84.4420384182), (0, 83.095))
            Line((0, 83.095), (0, 85))
            Line((0, 85), (-1.905, 85))
        make_face()
    revolve(axis=Axis((0, 0, 0), (0, -1, 0)), revolution_arc=F3_T29_ANGLE)

    split(bisect_by=Plane.YZ.offset(-10), keep=Keep.BOTTOM)


with BuildPart() as f3_tool31:
    # F3_s32 → F3_t33 (revolve)
    with BuildSketch(Plane.XY.offset(89.7048575403)):
        with BuildLine():
            ThreePointArc((2.5, -1.905), (3.0579615818, -0.5579615818), (4.405, 0))
            Line((4.405, 0), (2.5, 0))
            Line((2.5, 0), (2.5, -1.905))
        make_face()
    revolve(axis=Axis((0, 0, 89.7048575403), (0, -1, 0)))


with BuildPart() as f3_tool35:
    # F3_s36 → F3_t37 (new body)
    with BuildSketch(Plane.XY.offset(79.6472150807)):
        with BuildLine():
            ThreePointArc((10, -1.905), (9.4420384182, -0.5579615818), (8.095, 0))
            Line((8.095, 0), (10, 0))
            Line((10, 0), (10, -1.905))
        make_face()
    extrude(amount=F3_T37_DEPTH)

    # F3_s38 → F3_t39 (intersect, symmetric)
    with BuildSketch(Plane.XZ.offset(1)):
        Circle(F3_S38_R)
    extrude(amount=F3_T39_DEPTH, both=True, mode=Mode.INTERSECT)


with BuildPart() as f3_tool40:
    # F3_s41 → F3_t42 (revolve)
    with BuildSketch(Plane.XY):
        with BuildLine():
            ThreePointArc((85, -1.905), (84.4420384182, -0.5579615818), (83.095, 0))
            Line((83.095, 0), (85, 0))
            Line((85, 0), (85, -1.905))
        make_face()
    revolve(axis=Axis((0, 0, 0), (0, -1, 0)), revolution_arc=F3_T42_ANGLE)

    split(bisect_by=Plane.YZ.offset(10), keep=Keep.BOTTOM)


with BuildPart() as f3_tool35_1:
    add(f3_tool35.part)

    # F3_t44: intersect F3_tool40
    add(f3_tool40.part, mode=Mode.INTERSECT)


with BuildPart() as f3_tool46:
    # F3_s47 → F3_t48 (revolve)
    with BuildSketch(Plane(origin=(0, 0, 0), x_dir=(0, 1, 0), z_dir=(0.9980865701, 0, 0.0618320187))):
        with BuildLine():
            ThreePointArc((-1.905, 85), (-0.5579615818, 84.4420384182), (0, 83.095))
            Line((0, 83.095), (0, 85))
            Line((0, 85), (-1.905, 85))
        make_face()
    revolve(axis=Axis((0, 0, 0), (0, -1, 0)), revolution_arc=F3_T48_ANGLE)

    split(bisect_by=Plane.YZ.offset(-10), keep=Keep.TOP)


with BuildPart() as f3_tool50:
    # F3_s51 → F3_t52 (new body)
    with BuildSketch(Plane.XY.offset(99.7625)):
        with BuildLine():
            ThreePointArc((-10, -1.905), (-9.4420384182, -0.5579615818), (-8.095, 0))
            Line((-8.095, 0), (-10, 0))
            Line((-10, 0), (-10, -1.905))
        make_face()
    extrude(amount=-F3_T52_DEPTH)

    # F3_s53 → F3_t54 (intersect, symmetric)
    with BuildSketch(Plane.XZ.offset(1)):
        Circle(F3_S53_R)
    extrude(amount=F3_T54_DEPTH, both=True, mode=Mode.INTERSECT)


with BuildPart() as f3_tool46_1:
    add(f3_tool46.part)

    # F3_t55: intersect F3_tool50
    add(f3_tool50.part, mode=Mode.INTERSECT)


with BuildPart() as f1_7:
    add(f1_6.part)

    # F3_t56: cut F3_tool1, F3_tool4, F3_tool7, F3_tool10, F3_tool14, F3_tool19, F3_tool22, F3_tool27, F3_tool31, F3_tool35, F3_tool46
    add([f3_tool1.part, f3_tool4.part, f3_tool7.part, f3_tool10.part, f3_tool14.part, f3_tool19.part, f3_tool22.part, f3_tool27.part, f3_tool31.part, f3_tool35_1.part, f3_tool46_1.part], mode=Mode.SUBTRACT)


solid = f1_7.part
